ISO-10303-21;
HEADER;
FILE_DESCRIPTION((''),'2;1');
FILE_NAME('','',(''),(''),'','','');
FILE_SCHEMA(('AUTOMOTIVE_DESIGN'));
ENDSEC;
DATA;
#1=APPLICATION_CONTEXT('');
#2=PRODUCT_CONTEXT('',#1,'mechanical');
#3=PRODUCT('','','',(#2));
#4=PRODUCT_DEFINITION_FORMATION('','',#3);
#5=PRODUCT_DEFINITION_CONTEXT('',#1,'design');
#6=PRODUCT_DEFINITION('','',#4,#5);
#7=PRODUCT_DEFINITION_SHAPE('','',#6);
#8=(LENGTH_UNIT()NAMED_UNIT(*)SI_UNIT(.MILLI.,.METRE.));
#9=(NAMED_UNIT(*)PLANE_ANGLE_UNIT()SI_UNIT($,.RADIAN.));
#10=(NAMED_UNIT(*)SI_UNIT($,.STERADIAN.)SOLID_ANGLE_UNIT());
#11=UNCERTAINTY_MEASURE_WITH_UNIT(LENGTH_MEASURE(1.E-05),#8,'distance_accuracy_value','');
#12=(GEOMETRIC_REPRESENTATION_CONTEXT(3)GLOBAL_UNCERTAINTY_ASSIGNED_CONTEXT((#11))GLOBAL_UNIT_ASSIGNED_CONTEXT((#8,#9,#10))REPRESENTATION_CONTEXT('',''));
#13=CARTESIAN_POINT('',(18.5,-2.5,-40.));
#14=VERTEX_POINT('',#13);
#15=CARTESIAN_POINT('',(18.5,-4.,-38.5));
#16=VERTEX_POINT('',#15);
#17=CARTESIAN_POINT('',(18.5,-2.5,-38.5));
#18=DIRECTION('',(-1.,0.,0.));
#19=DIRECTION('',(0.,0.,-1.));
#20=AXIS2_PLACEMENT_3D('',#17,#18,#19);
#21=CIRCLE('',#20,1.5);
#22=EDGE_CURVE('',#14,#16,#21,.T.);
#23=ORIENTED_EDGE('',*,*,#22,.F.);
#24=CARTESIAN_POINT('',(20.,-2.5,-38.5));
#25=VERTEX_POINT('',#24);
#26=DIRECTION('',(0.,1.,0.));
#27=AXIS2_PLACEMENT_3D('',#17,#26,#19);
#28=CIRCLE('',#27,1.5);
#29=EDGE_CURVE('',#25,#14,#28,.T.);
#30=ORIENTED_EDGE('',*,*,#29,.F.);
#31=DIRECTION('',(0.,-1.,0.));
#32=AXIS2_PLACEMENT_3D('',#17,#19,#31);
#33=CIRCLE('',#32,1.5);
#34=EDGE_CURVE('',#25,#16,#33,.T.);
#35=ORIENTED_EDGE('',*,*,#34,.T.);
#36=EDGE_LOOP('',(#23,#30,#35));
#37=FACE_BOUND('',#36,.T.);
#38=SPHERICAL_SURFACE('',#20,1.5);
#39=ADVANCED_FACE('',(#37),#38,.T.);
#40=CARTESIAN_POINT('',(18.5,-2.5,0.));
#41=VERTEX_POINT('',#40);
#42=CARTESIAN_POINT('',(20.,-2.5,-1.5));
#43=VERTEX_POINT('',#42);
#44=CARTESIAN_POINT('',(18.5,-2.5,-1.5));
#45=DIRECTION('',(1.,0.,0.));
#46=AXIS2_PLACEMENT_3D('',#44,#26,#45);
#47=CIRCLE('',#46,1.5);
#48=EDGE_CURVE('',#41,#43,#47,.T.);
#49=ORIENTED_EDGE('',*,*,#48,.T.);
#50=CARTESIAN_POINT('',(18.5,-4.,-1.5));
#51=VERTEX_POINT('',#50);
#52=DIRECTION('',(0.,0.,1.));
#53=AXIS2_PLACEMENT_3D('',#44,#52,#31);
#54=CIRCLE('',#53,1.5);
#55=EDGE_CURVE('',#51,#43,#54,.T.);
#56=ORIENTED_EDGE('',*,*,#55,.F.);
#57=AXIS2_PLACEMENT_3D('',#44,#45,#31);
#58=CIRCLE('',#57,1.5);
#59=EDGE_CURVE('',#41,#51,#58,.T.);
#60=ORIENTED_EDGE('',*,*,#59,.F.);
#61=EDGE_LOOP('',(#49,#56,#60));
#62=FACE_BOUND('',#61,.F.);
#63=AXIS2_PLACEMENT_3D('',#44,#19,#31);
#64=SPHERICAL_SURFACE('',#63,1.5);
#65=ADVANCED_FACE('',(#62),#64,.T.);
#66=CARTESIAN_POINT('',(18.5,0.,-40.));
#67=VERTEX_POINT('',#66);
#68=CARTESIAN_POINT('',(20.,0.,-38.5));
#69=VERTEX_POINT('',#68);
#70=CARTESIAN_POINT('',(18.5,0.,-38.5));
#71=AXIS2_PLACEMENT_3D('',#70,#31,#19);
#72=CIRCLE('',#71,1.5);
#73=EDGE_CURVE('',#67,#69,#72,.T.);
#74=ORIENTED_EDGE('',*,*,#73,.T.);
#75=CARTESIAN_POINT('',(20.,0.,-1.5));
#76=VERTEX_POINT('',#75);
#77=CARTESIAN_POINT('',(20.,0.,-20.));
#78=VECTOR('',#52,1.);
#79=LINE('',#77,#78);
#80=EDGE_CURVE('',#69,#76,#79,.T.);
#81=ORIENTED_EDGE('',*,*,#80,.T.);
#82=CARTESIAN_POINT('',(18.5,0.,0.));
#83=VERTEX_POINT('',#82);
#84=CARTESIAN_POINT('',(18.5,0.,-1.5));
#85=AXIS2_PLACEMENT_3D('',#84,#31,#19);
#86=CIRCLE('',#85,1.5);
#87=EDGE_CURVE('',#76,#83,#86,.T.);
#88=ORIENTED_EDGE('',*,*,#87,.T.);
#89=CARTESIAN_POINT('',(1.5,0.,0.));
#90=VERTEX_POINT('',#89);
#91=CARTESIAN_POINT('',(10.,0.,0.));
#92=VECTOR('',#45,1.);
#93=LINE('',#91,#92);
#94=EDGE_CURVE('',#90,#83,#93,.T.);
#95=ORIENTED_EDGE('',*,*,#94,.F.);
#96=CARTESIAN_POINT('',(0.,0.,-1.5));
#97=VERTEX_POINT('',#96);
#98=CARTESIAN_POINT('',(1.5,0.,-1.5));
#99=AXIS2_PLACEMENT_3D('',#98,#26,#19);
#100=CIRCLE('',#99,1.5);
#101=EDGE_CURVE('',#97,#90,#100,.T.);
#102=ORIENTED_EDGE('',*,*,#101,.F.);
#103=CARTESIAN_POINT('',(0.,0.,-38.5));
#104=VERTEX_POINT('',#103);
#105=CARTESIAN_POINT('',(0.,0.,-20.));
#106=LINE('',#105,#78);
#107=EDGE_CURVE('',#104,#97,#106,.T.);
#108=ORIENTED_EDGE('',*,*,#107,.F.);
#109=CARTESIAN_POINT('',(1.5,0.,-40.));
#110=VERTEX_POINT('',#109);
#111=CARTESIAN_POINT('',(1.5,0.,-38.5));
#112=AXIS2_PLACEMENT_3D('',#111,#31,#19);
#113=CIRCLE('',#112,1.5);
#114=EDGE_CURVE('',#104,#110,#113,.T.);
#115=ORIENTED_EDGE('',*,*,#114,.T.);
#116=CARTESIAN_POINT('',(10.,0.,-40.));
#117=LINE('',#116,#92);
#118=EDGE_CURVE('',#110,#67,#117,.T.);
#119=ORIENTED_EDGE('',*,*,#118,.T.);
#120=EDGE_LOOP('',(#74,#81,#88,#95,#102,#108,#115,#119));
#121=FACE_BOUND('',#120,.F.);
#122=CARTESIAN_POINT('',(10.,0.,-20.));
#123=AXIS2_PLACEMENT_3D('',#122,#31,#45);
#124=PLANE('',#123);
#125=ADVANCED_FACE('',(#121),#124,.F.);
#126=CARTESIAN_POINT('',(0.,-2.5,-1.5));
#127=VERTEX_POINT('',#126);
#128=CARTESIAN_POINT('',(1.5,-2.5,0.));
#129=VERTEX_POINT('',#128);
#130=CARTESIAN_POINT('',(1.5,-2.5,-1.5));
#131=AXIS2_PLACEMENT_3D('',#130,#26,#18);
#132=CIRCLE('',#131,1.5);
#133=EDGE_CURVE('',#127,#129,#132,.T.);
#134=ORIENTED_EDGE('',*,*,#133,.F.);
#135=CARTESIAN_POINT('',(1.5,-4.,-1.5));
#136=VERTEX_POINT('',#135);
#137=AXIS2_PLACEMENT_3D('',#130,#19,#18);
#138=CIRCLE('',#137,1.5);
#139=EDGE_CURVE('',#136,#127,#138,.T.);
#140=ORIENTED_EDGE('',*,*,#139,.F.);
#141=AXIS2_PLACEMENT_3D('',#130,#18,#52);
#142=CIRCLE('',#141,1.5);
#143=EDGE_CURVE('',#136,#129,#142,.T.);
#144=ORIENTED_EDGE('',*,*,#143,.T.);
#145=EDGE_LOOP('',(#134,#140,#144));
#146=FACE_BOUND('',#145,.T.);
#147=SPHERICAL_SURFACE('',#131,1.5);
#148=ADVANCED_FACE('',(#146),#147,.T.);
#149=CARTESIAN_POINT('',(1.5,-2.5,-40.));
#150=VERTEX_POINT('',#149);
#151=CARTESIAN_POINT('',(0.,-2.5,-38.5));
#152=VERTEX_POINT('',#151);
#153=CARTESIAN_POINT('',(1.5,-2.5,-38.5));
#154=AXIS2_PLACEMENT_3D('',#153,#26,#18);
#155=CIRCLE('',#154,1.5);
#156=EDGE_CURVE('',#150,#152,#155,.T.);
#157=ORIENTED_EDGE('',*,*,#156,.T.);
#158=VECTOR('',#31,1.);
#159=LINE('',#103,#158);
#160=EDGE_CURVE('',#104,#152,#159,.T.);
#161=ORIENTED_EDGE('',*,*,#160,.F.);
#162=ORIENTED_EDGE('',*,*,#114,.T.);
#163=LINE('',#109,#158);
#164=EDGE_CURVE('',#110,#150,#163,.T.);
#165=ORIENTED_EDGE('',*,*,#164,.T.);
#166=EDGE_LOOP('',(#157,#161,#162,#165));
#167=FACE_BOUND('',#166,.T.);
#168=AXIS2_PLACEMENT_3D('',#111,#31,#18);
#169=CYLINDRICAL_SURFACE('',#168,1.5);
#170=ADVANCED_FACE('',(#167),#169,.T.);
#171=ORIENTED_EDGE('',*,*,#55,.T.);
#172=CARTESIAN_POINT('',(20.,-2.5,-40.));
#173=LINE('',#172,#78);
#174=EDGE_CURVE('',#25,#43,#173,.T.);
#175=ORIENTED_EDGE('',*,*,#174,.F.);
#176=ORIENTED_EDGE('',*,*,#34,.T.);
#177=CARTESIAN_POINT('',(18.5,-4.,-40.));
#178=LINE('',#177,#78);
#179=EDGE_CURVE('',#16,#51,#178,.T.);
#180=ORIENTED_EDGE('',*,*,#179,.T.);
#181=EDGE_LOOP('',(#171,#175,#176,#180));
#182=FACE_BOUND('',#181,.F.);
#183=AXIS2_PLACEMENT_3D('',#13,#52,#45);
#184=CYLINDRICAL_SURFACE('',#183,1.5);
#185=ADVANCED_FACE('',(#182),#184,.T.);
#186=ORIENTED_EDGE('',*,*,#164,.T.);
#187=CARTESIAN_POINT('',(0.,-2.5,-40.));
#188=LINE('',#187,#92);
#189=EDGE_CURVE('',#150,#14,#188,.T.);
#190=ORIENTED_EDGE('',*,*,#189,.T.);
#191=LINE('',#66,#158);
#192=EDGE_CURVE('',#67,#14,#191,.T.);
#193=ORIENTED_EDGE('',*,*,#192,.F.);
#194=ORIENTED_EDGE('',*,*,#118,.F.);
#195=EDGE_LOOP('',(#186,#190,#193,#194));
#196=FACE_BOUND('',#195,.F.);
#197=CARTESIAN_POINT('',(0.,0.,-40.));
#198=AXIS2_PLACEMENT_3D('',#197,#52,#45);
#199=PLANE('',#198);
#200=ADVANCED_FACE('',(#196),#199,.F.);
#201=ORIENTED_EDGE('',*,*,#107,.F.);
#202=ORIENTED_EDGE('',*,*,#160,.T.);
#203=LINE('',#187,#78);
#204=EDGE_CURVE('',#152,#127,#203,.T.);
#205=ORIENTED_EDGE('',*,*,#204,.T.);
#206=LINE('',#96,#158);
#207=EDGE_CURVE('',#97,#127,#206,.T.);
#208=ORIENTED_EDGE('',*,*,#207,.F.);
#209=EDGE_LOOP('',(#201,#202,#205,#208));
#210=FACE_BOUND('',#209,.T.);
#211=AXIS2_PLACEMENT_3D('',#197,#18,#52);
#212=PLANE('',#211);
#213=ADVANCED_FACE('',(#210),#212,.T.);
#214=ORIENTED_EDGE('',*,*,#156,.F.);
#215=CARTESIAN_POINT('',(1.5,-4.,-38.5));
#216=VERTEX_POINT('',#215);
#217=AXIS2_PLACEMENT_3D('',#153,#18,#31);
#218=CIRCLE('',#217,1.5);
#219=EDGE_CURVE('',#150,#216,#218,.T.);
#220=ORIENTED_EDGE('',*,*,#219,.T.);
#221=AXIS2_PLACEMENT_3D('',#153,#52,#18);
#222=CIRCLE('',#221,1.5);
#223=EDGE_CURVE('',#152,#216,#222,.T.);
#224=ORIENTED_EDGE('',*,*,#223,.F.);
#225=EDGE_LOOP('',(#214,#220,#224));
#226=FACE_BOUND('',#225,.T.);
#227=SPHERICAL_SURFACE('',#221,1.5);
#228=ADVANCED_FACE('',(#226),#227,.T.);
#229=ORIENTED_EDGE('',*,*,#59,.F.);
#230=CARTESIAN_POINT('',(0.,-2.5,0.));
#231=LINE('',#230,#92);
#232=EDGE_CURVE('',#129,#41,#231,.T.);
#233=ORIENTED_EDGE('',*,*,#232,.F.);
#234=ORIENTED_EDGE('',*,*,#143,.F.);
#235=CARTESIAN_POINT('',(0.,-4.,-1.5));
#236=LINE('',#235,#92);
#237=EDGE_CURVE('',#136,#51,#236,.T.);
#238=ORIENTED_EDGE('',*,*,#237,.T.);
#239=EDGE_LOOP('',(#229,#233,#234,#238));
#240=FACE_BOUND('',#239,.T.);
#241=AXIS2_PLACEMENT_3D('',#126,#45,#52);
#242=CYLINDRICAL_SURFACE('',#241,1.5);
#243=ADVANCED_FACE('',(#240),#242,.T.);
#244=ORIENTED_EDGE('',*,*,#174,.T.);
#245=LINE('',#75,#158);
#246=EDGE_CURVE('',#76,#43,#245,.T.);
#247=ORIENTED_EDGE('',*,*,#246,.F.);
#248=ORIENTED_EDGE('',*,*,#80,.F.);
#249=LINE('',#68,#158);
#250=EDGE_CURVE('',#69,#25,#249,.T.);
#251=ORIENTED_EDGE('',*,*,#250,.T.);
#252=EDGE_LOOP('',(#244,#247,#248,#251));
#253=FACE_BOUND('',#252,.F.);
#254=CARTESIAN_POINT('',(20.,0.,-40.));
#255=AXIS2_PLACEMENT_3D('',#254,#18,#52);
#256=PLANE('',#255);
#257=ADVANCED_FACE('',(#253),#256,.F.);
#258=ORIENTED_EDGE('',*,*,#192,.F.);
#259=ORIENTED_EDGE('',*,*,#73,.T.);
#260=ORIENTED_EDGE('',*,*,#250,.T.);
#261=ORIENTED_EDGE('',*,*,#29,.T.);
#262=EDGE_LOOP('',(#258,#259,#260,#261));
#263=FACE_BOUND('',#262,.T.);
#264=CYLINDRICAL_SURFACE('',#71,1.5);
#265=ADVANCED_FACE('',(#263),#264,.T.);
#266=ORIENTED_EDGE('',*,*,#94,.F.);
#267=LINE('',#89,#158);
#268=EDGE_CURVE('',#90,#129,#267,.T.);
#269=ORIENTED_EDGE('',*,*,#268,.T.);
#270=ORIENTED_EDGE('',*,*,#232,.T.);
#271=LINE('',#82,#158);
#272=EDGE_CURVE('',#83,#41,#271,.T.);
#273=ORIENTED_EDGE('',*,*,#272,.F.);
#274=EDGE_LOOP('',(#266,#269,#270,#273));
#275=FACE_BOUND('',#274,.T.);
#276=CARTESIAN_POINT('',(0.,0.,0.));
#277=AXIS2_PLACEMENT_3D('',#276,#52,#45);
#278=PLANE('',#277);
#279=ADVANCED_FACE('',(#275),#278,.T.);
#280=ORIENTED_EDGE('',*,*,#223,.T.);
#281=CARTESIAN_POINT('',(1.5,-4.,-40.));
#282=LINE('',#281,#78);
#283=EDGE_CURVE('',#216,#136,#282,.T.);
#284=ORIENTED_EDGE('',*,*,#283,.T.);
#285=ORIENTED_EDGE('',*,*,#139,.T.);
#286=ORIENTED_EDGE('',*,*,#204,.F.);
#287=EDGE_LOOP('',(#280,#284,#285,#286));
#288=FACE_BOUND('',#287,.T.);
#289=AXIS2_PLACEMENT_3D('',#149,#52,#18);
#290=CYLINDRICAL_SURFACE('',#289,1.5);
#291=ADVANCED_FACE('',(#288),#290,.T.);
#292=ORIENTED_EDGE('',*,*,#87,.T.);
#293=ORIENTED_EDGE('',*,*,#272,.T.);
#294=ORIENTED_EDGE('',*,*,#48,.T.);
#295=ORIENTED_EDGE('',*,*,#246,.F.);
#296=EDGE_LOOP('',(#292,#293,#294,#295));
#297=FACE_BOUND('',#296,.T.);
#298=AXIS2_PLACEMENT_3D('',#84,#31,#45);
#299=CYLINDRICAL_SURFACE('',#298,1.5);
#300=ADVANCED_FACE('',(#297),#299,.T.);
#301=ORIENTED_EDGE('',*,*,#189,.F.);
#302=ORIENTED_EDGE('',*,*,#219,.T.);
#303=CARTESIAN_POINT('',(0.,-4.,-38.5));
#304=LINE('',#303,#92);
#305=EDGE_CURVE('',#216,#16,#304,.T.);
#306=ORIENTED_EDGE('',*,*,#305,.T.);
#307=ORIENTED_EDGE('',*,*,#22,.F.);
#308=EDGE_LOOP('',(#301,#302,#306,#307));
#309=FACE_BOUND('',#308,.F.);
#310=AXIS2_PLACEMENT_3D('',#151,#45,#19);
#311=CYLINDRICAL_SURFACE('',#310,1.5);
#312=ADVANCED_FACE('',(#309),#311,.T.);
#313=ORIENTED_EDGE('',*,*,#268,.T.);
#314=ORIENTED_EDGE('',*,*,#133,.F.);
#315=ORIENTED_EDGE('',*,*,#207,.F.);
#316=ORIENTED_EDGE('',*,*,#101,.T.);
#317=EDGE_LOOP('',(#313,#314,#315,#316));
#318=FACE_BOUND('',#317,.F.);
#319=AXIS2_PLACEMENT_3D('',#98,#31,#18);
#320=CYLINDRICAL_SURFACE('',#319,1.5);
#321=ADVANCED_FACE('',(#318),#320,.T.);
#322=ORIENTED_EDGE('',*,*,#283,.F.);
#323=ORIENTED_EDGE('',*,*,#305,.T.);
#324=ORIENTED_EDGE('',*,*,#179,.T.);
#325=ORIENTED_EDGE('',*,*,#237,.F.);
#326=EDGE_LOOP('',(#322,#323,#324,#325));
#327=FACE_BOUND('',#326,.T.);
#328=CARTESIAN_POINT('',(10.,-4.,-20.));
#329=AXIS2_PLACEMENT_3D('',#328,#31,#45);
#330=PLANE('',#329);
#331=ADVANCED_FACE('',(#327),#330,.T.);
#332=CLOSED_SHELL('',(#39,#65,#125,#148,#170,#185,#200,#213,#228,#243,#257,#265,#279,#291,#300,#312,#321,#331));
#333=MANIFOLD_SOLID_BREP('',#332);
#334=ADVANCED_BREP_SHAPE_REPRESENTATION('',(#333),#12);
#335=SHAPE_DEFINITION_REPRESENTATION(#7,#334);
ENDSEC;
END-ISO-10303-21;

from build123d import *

# Parameters (mm, degrees)
F0_W     = 20
F0_H     = 40
F0_R     = 2.5
F3_DEPTH = 4
F4_R     = 1.5


# Not quite as in the source:
# - the program builds the solid bodies; features that only make, move or delete a surface that nothing else refers to are left out


with BuildPart() as f3:
    # F0 (on Front) → F3 (new body)
    with BuildSketch(Plane.XZ):
        with Locations((10, -20)):
            Rectangle(F0_W, F0_H)
        with Locations((10, -29.9999993294)):
            Circle(F0_R, mode=Mode.SUBTRACT)
        with Locations((10, -10)):
            Circle(F0_R, mode=Mode.SUBTRACT)
        with Locations((10, -10)):
            Circle(F0_R)
        with Locations((10, -29.9999993294)):
            Circle(F0_R)
    extrude(amount=F3_DEPTH)

    # F4
    f4_edges = [f3.edges().sort_by_distance(p)[0] for p in [
        (0, -2, 0),
        (0, -4, -20),
        (0, -2, -40),
        (10, -4, -40),
        (20, -2, -40),
        (20, -4, -20),
        (10, -4, 0),
        (20, -2, 0),
    ]]
    fillet(f4_edges, radius=F4_R)


solid = f3.part
